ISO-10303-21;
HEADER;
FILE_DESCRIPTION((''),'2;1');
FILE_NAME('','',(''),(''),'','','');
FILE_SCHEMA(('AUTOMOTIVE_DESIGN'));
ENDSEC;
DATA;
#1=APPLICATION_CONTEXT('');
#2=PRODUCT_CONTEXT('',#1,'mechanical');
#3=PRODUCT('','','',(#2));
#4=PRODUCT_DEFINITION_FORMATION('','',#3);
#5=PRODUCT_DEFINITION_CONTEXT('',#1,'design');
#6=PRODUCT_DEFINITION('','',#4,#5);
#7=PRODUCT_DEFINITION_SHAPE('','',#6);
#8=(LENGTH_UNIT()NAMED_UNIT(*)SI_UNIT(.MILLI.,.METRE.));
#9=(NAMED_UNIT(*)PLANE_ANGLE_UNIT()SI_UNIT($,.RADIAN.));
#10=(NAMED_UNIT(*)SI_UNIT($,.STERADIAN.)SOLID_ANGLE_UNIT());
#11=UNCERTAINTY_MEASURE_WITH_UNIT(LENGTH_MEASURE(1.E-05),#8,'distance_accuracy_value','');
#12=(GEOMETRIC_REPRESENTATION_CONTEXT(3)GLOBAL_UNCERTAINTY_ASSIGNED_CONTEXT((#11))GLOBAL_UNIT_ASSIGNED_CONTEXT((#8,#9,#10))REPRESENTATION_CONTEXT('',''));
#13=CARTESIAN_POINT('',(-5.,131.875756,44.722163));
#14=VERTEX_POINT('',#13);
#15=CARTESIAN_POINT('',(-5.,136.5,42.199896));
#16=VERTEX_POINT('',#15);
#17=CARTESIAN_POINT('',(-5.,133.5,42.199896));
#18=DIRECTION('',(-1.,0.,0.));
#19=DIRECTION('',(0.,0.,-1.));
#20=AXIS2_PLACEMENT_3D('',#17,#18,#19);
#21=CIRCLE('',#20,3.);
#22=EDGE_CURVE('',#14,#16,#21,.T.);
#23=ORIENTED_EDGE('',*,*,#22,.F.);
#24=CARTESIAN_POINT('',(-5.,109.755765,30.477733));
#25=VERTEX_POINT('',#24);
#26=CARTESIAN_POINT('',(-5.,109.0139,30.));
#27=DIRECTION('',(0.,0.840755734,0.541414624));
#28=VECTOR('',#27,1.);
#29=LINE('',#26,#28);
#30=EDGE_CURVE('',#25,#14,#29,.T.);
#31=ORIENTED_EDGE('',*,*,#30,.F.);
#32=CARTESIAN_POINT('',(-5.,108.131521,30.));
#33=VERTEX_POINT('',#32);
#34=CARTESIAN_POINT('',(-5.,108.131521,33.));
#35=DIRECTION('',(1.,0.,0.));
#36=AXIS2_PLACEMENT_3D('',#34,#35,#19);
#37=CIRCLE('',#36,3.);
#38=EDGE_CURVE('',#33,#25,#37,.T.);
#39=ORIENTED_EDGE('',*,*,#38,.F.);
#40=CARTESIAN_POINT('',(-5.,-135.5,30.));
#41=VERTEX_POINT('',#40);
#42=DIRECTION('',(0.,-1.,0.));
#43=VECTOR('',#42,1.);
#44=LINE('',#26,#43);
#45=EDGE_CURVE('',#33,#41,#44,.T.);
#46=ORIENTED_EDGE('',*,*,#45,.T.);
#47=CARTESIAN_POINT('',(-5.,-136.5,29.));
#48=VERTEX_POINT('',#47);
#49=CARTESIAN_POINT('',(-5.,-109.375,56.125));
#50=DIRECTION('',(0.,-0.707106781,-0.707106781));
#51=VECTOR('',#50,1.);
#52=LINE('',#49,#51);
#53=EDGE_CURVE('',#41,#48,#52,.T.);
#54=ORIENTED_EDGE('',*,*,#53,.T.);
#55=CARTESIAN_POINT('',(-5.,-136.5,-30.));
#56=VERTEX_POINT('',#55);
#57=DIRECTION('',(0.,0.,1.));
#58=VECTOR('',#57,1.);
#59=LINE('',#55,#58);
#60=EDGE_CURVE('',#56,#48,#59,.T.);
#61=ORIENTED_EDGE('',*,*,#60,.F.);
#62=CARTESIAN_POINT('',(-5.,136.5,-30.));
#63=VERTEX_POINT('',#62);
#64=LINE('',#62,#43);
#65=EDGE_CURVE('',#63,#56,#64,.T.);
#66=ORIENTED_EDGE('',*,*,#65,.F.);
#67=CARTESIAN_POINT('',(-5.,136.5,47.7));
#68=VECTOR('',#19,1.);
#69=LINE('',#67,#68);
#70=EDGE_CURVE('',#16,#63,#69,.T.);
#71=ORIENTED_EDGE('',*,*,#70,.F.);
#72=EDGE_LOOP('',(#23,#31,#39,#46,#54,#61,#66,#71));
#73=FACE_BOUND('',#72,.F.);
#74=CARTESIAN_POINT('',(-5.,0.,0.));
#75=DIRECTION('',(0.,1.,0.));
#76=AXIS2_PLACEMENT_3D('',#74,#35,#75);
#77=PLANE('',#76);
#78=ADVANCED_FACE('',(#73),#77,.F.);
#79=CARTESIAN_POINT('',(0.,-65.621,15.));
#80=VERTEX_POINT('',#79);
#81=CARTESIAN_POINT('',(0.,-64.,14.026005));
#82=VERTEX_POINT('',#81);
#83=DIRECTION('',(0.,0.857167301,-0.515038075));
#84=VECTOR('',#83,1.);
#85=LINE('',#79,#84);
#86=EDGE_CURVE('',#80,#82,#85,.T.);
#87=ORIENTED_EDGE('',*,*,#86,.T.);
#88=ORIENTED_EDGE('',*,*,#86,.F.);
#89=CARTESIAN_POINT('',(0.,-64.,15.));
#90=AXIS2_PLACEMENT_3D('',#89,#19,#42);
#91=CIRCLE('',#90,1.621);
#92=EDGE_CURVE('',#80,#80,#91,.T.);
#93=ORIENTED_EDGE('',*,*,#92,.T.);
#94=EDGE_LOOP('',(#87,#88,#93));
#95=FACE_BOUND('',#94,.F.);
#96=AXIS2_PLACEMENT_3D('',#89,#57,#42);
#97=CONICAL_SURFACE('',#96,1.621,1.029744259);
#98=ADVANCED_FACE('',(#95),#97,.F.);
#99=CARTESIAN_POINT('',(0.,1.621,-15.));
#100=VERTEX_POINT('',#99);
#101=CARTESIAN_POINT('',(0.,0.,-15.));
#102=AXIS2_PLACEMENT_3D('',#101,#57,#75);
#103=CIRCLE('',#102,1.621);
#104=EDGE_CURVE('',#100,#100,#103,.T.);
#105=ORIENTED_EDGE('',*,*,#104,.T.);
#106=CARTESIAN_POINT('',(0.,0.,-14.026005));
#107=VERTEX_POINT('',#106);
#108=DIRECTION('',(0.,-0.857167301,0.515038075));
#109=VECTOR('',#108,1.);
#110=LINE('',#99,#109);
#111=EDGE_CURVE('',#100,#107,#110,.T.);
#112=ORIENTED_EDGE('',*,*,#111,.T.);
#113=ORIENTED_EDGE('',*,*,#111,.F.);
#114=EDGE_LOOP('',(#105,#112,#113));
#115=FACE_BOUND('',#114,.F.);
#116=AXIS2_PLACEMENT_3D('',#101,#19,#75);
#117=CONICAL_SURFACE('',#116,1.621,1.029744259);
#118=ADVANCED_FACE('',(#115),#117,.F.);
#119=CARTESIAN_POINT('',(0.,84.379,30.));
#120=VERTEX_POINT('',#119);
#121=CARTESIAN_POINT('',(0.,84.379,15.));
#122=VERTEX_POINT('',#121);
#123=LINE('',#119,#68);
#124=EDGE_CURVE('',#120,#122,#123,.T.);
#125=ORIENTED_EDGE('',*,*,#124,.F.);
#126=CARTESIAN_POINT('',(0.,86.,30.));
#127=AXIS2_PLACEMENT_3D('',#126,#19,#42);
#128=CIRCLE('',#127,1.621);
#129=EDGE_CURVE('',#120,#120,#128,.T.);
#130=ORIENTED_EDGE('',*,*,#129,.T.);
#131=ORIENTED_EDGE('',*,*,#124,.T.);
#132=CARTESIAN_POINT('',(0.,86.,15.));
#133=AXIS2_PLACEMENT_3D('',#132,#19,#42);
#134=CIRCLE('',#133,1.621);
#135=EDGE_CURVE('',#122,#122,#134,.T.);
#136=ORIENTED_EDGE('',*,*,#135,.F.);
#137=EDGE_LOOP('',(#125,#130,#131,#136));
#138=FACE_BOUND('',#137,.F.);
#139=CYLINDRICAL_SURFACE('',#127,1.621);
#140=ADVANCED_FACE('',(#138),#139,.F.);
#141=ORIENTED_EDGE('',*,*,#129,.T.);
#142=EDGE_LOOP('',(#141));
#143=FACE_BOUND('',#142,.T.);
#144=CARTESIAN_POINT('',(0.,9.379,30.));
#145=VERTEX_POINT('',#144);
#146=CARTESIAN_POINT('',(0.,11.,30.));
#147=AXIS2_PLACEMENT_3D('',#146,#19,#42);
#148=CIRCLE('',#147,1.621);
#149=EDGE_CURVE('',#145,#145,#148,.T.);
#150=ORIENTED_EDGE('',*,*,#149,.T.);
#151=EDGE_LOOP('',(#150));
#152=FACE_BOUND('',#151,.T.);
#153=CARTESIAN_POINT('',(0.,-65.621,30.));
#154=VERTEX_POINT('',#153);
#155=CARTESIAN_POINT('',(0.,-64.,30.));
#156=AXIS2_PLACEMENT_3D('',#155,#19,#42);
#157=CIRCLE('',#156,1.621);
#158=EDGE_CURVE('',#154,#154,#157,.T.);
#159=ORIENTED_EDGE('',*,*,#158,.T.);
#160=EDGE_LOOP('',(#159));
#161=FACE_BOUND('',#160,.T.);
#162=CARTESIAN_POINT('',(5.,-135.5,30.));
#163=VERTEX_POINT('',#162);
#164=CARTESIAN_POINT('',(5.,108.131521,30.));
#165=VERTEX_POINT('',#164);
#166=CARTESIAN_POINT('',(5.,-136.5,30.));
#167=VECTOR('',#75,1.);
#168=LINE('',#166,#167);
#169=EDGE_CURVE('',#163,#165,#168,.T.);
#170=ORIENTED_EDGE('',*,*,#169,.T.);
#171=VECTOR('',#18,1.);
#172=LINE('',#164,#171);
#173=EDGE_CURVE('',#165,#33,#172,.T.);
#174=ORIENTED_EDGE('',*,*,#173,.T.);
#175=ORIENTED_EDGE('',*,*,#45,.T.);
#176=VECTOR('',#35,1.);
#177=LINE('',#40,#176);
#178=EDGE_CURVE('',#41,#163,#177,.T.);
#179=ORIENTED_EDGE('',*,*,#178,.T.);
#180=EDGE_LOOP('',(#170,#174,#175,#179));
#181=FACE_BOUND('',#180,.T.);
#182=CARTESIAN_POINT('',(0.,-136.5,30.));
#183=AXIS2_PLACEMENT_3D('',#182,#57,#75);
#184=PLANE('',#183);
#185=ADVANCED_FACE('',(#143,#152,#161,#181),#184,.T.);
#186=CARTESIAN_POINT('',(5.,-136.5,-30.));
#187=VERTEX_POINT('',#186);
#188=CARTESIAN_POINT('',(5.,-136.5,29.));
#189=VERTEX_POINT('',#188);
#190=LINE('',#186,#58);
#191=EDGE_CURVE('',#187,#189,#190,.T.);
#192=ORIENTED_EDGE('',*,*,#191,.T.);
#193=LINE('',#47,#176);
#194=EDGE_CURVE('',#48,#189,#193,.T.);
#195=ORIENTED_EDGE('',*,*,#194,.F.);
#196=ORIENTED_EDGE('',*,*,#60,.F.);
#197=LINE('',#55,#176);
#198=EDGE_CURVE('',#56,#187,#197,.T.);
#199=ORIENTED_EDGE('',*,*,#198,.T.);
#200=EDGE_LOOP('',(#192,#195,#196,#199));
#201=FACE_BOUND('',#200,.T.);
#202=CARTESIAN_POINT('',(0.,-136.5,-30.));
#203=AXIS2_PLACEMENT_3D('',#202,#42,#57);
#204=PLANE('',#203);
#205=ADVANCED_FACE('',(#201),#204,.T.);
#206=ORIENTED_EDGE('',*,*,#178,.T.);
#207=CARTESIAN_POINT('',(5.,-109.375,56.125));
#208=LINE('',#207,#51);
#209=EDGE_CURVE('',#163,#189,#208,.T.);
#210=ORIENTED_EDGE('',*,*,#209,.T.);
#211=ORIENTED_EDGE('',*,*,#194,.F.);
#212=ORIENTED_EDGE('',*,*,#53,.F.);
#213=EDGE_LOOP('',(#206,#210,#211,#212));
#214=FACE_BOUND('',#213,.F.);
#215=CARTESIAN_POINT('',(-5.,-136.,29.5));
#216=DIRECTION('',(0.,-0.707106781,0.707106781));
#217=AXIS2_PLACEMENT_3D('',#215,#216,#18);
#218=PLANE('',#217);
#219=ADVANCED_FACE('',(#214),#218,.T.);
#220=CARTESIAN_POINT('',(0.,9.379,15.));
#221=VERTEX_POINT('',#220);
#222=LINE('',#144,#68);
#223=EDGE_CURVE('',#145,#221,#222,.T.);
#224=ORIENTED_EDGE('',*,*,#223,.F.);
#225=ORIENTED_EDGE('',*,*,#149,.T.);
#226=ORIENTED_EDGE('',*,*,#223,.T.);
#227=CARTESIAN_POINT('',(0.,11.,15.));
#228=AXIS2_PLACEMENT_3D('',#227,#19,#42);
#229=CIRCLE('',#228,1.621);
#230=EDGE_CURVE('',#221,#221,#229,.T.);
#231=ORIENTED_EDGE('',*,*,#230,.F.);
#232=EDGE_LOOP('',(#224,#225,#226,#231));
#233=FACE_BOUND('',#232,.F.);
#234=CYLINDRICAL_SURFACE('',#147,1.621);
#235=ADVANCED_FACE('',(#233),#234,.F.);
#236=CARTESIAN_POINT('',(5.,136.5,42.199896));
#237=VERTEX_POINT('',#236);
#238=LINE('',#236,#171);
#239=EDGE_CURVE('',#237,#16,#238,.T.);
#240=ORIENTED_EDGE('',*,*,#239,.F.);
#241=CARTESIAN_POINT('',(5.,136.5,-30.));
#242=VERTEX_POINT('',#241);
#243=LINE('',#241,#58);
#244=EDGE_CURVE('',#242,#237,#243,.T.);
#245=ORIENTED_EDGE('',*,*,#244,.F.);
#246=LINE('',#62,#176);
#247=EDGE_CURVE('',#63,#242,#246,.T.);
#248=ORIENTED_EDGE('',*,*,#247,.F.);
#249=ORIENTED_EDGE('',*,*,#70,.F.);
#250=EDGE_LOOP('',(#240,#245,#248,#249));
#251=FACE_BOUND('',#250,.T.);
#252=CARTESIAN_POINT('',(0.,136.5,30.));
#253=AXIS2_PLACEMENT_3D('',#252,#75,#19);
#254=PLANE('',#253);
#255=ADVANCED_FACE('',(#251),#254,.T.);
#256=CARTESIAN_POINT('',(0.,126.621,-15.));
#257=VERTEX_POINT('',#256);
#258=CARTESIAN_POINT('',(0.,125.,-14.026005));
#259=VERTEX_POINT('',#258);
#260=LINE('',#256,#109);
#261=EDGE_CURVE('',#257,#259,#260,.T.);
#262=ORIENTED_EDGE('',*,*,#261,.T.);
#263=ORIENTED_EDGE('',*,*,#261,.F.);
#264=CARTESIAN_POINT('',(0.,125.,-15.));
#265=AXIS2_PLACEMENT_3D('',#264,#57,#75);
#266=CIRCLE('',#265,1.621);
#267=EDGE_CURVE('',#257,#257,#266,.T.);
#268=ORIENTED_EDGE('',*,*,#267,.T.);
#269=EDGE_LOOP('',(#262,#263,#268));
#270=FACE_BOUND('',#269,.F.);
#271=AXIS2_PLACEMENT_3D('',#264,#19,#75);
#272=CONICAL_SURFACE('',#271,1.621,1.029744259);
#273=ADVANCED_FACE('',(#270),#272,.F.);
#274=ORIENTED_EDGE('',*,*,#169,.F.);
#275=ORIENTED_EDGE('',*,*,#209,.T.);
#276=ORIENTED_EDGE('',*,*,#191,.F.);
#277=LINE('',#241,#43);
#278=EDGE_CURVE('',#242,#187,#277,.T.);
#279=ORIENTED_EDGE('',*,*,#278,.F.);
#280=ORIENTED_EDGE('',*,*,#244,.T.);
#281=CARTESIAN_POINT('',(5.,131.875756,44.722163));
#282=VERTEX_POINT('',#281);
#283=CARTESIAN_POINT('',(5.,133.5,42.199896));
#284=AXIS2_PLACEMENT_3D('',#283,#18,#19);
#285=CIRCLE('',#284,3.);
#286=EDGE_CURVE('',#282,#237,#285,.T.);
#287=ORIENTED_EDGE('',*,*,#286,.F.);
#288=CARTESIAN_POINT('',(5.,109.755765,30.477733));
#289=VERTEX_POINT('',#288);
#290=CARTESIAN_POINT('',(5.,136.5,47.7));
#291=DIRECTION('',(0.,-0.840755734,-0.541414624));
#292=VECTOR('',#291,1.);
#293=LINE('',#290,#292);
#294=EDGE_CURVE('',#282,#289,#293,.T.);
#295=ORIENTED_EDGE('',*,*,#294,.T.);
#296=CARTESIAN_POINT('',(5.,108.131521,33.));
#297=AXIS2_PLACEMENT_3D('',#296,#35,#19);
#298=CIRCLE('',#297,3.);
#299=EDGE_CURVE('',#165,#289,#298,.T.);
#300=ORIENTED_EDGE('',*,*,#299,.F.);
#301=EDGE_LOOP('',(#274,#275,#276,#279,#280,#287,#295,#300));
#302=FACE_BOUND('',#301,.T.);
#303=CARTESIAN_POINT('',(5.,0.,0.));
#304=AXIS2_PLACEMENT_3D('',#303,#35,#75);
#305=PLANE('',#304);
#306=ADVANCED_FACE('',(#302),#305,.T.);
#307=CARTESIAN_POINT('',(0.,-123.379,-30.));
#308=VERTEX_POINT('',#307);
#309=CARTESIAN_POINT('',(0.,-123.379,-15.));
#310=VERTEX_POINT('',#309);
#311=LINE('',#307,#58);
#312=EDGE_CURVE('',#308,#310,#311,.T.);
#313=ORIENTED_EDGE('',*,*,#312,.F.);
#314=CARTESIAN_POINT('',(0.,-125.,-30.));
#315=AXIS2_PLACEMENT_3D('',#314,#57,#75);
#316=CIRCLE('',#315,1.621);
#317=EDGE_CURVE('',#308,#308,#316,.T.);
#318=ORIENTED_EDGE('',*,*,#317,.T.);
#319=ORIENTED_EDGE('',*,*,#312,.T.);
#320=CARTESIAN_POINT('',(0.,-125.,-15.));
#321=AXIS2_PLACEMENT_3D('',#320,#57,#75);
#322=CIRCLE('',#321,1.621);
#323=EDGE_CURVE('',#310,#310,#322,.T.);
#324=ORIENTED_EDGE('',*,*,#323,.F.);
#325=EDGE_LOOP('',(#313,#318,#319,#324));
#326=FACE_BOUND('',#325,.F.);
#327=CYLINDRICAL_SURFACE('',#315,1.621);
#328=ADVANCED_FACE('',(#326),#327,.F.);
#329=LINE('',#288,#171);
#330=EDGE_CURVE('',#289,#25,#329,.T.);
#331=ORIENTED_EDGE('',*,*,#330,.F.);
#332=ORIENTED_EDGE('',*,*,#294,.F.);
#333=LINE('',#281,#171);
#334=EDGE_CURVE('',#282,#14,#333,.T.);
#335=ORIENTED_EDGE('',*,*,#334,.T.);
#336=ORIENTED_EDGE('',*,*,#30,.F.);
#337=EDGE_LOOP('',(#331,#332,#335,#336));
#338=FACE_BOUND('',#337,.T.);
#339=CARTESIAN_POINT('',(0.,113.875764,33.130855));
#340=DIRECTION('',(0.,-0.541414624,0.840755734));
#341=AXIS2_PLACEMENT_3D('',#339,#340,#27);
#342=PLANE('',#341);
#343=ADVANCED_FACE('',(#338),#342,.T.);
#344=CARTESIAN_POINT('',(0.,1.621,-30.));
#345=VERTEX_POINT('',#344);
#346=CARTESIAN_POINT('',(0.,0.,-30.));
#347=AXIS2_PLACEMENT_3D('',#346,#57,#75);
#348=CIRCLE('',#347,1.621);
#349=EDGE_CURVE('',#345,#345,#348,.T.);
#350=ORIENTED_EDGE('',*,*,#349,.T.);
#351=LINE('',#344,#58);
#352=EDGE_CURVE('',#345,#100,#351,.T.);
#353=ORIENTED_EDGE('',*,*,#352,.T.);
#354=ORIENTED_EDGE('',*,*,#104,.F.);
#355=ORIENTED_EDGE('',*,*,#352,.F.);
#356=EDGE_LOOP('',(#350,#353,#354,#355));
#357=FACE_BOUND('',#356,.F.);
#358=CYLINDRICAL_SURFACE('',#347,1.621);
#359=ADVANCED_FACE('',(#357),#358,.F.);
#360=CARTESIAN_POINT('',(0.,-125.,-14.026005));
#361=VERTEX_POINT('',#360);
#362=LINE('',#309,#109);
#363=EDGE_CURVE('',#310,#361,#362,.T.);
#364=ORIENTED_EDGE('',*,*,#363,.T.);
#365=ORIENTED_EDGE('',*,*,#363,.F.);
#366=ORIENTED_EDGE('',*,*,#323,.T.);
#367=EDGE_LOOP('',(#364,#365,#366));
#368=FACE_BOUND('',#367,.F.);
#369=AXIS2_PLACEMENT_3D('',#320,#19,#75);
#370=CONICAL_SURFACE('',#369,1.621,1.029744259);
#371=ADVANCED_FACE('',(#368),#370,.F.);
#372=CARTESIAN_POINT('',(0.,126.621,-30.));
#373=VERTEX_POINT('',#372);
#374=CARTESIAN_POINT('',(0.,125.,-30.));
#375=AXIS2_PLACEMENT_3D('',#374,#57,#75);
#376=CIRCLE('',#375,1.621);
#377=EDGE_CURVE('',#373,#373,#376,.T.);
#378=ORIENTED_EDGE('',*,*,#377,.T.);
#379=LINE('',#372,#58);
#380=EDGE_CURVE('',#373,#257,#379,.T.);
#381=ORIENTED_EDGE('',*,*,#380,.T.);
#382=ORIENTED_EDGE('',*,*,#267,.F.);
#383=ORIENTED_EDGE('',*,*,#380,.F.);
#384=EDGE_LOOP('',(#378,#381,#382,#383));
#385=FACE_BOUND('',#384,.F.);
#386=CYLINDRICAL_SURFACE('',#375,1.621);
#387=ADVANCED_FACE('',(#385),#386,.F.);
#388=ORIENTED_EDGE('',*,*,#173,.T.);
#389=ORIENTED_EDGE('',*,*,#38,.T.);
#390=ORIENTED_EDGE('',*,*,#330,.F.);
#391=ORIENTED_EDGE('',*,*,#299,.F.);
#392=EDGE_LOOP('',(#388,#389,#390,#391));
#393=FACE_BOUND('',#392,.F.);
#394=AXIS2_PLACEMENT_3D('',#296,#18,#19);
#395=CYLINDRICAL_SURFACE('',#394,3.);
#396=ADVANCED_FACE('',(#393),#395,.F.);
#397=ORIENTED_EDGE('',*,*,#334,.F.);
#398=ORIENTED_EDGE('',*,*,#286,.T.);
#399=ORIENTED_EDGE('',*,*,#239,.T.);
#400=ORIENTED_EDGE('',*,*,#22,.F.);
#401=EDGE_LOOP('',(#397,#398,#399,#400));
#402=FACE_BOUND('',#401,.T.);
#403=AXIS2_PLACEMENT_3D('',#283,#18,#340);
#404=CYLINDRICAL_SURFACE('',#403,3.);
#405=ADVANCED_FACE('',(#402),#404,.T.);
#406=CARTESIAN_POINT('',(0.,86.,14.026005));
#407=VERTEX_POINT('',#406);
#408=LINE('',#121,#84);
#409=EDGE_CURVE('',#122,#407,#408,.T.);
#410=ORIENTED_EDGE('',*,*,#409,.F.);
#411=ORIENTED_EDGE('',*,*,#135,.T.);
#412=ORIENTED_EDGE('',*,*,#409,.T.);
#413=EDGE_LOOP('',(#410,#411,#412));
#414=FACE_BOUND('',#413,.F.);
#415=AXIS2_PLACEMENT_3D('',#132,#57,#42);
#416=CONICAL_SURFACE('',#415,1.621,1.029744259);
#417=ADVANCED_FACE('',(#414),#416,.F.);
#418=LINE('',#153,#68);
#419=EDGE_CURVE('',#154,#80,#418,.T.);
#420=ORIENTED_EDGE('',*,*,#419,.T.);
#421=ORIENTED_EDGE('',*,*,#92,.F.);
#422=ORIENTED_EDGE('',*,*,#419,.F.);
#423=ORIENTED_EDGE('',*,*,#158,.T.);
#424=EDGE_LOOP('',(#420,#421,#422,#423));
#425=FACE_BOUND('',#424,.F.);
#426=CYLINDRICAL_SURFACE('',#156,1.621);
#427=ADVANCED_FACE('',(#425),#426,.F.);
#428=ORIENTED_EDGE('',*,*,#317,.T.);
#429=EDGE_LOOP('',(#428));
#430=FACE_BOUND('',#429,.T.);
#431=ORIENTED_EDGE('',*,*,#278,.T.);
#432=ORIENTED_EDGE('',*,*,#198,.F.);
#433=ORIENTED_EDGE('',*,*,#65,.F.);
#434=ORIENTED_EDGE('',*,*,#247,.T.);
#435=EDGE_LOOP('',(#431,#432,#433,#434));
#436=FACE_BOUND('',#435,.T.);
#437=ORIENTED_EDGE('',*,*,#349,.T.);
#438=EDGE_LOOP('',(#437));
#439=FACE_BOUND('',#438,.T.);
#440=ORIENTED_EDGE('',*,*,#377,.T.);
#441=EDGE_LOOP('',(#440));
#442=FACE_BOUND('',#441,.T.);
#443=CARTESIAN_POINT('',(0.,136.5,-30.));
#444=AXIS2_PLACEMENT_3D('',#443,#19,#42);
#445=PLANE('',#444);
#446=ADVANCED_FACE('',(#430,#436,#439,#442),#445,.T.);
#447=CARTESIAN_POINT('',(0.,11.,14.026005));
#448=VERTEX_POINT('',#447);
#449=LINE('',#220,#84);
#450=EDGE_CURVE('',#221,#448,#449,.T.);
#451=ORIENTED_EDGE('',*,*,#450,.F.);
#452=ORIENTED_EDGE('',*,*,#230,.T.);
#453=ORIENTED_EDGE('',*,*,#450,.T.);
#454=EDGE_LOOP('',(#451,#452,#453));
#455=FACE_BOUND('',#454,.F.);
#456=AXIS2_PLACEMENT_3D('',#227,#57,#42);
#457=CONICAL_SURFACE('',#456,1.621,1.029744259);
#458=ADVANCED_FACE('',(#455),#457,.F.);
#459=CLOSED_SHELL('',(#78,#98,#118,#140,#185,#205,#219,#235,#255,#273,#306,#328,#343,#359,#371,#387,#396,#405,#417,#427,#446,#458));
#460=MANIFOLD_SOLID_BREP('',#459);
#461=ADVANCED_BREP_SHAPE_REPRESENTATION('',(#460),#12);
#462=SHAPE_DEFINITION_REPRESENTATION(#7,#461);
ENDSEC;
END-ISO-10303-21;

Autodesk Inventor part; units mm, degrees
ref_plane "YZ Plane" through (0, 0, 0) normal (1, 0, 0) x (0, 1, 0)
ref_plane "XZ Plane" through (0, 0, 0) normal (0, 1, 0) x (-1, 0, 0)
ref_plane "XY Plane" through (0, 0, 0) normal (0, 0, 1) x (1, 0, 0)
sketch "Sketch1" plane through (0, 0, 0) normal (1, 0, 0) x (0, 1, 0)
  line L0 (-191.1, 0) -> (191.1, 0) construction
  line L1 (0, -45.54) -> (0, 63.24) construction
  line L2 (-136.5, 30) -> (136.5, 30)
  line L3 (136.5, 30) -> (136.5, -30)
  line L4 (136.5, -30) -> (-136.5, -30)
  line L5 (-136.5, -30) -> (-136.5, 30)
  line L6 (109.0139, 30) -> (136.5, 47.7)
  line L7 (136.5, 47.7) -> (136.5, 30)
  circle A0 centre (133.5, 42.1999) radius 3
  circle A1 centre (115.5, 30.6086) radius 3
  line L8 (-136.5, 30) -> (103.5, 30) construction
  line L9 (103.5, 30) -> (103.5, 38) construction
  line L10 (103.5, 38) -> (-136.5, 38) construction
  line L11 (-136.5, 38) -> (-136.5, 30) construction
  line L12 (112.5, 32.2449) -> (112.5, 30)
  circle A2 centre (109.5, 30) radius 3
  circle A3 centre (109.5, 33) radius 3
  line L13 (-56.5, 30) -> (3.5, 30)
  line L14 (3.5, 30) -> (3.5, 6.4132)
  line L15 (3.5, 6.4132) -> (-56.5, 6.4132)
  line L16 (-56.5, 6.4132) -> (-56.5, 30)
  line L17 (-26.5, 6.4132) -> (-26.5, 30) construction
  point P0 (0, 0)
  point P1 (106.5, 30)
  dimension "d6" = 6
  dimension "d1" = 32.78
  dimension "d2" = 6
  dimension "d3" = 8
  dimension "d4" = 240
  dimension "d7" = 60
  dimension "d35" = 147.22
  dimension "d36" = 273
  dimension "d37" = 17.7
  dimension "d38" = 24
  dimension "d39" = 110
  dimension "d40" = 60
extrude "Extrusion1" add sketch "Sketch1" along normal mid plane 10 contours L2 L16 L15 L14 A2 A1 L3 L4 L5 | L2 L14 L15 L16 | L2 A2 | L2 A1 L6 A0 L7 | L6 A3 L2 | L12 A1 L2 | A2 A3 L6 L12 | L2 A3 A2 | A1 L2 | L2 A1 | A0 L6 L7 | A0 | A3 L6 A2 | L6 A3 A2 | L12 L6 A1 picked at (110.4979, 30.6349) picked at (112.1863, 31.9825)
sketch "Sketch2" plane through (-5, -136.5, 30) normal (0, 0, 1) x (1, 0, 0)
  line L0 (5, -54.6) -> (5, 327.6) construction
  line L1 (0, 0) -> (10, 0) projected
  point P0 (5, 136.5)
  point P1 (5, 72.5)
  point P2 (5, 147.5)
  point P3 (5, 222.5)
  dimension "d11" = 72.5
  dimension "d12" = 75
  dimension "d13" = 75
hole "Hole1" at (0, -64, 30) at (0, 11, 30) at (0, 86, 30) direction (0, 0, -1) diameter 3.242 depth 15 tip angle 118 thread size "M4x0.7" class "6H" standard "ISO Metric profile"
sketch "Sketch3" plane through (5, 136.5, -30) normal (0, 0, -1) x (-1, 0, 0)
  line L0 (12, -136.5) -> (-2, -136.5) construction
  line L1 (5, -327.6) -> (5, 54.6) construction
  point P0 (5, -136.5)
  point P1 (5, -261.5)
  point P2 (5, -136.5)
  point P3 (5, -11.5)
  dimension "d21" = 250
hole "Hole2" at (0, -125, -30) at (0, 0, -30) at (0, 125, -30) direction (0, 0, 1) diameter 3.242 depth 15 tip angle 118 thread size "M4x0.7" class "6H" standard "ISO Metric profile"
fillet "Fillet1" radius 3 2 edges at (0, 136.5, 47.7) (0, 109.0139, 30)
chamfer "Chamfer1" distance 1 angle 45 1 edges at (0, -136.5, 30)
properties part number "GRJ-04-102" material "Fenolite OR"
